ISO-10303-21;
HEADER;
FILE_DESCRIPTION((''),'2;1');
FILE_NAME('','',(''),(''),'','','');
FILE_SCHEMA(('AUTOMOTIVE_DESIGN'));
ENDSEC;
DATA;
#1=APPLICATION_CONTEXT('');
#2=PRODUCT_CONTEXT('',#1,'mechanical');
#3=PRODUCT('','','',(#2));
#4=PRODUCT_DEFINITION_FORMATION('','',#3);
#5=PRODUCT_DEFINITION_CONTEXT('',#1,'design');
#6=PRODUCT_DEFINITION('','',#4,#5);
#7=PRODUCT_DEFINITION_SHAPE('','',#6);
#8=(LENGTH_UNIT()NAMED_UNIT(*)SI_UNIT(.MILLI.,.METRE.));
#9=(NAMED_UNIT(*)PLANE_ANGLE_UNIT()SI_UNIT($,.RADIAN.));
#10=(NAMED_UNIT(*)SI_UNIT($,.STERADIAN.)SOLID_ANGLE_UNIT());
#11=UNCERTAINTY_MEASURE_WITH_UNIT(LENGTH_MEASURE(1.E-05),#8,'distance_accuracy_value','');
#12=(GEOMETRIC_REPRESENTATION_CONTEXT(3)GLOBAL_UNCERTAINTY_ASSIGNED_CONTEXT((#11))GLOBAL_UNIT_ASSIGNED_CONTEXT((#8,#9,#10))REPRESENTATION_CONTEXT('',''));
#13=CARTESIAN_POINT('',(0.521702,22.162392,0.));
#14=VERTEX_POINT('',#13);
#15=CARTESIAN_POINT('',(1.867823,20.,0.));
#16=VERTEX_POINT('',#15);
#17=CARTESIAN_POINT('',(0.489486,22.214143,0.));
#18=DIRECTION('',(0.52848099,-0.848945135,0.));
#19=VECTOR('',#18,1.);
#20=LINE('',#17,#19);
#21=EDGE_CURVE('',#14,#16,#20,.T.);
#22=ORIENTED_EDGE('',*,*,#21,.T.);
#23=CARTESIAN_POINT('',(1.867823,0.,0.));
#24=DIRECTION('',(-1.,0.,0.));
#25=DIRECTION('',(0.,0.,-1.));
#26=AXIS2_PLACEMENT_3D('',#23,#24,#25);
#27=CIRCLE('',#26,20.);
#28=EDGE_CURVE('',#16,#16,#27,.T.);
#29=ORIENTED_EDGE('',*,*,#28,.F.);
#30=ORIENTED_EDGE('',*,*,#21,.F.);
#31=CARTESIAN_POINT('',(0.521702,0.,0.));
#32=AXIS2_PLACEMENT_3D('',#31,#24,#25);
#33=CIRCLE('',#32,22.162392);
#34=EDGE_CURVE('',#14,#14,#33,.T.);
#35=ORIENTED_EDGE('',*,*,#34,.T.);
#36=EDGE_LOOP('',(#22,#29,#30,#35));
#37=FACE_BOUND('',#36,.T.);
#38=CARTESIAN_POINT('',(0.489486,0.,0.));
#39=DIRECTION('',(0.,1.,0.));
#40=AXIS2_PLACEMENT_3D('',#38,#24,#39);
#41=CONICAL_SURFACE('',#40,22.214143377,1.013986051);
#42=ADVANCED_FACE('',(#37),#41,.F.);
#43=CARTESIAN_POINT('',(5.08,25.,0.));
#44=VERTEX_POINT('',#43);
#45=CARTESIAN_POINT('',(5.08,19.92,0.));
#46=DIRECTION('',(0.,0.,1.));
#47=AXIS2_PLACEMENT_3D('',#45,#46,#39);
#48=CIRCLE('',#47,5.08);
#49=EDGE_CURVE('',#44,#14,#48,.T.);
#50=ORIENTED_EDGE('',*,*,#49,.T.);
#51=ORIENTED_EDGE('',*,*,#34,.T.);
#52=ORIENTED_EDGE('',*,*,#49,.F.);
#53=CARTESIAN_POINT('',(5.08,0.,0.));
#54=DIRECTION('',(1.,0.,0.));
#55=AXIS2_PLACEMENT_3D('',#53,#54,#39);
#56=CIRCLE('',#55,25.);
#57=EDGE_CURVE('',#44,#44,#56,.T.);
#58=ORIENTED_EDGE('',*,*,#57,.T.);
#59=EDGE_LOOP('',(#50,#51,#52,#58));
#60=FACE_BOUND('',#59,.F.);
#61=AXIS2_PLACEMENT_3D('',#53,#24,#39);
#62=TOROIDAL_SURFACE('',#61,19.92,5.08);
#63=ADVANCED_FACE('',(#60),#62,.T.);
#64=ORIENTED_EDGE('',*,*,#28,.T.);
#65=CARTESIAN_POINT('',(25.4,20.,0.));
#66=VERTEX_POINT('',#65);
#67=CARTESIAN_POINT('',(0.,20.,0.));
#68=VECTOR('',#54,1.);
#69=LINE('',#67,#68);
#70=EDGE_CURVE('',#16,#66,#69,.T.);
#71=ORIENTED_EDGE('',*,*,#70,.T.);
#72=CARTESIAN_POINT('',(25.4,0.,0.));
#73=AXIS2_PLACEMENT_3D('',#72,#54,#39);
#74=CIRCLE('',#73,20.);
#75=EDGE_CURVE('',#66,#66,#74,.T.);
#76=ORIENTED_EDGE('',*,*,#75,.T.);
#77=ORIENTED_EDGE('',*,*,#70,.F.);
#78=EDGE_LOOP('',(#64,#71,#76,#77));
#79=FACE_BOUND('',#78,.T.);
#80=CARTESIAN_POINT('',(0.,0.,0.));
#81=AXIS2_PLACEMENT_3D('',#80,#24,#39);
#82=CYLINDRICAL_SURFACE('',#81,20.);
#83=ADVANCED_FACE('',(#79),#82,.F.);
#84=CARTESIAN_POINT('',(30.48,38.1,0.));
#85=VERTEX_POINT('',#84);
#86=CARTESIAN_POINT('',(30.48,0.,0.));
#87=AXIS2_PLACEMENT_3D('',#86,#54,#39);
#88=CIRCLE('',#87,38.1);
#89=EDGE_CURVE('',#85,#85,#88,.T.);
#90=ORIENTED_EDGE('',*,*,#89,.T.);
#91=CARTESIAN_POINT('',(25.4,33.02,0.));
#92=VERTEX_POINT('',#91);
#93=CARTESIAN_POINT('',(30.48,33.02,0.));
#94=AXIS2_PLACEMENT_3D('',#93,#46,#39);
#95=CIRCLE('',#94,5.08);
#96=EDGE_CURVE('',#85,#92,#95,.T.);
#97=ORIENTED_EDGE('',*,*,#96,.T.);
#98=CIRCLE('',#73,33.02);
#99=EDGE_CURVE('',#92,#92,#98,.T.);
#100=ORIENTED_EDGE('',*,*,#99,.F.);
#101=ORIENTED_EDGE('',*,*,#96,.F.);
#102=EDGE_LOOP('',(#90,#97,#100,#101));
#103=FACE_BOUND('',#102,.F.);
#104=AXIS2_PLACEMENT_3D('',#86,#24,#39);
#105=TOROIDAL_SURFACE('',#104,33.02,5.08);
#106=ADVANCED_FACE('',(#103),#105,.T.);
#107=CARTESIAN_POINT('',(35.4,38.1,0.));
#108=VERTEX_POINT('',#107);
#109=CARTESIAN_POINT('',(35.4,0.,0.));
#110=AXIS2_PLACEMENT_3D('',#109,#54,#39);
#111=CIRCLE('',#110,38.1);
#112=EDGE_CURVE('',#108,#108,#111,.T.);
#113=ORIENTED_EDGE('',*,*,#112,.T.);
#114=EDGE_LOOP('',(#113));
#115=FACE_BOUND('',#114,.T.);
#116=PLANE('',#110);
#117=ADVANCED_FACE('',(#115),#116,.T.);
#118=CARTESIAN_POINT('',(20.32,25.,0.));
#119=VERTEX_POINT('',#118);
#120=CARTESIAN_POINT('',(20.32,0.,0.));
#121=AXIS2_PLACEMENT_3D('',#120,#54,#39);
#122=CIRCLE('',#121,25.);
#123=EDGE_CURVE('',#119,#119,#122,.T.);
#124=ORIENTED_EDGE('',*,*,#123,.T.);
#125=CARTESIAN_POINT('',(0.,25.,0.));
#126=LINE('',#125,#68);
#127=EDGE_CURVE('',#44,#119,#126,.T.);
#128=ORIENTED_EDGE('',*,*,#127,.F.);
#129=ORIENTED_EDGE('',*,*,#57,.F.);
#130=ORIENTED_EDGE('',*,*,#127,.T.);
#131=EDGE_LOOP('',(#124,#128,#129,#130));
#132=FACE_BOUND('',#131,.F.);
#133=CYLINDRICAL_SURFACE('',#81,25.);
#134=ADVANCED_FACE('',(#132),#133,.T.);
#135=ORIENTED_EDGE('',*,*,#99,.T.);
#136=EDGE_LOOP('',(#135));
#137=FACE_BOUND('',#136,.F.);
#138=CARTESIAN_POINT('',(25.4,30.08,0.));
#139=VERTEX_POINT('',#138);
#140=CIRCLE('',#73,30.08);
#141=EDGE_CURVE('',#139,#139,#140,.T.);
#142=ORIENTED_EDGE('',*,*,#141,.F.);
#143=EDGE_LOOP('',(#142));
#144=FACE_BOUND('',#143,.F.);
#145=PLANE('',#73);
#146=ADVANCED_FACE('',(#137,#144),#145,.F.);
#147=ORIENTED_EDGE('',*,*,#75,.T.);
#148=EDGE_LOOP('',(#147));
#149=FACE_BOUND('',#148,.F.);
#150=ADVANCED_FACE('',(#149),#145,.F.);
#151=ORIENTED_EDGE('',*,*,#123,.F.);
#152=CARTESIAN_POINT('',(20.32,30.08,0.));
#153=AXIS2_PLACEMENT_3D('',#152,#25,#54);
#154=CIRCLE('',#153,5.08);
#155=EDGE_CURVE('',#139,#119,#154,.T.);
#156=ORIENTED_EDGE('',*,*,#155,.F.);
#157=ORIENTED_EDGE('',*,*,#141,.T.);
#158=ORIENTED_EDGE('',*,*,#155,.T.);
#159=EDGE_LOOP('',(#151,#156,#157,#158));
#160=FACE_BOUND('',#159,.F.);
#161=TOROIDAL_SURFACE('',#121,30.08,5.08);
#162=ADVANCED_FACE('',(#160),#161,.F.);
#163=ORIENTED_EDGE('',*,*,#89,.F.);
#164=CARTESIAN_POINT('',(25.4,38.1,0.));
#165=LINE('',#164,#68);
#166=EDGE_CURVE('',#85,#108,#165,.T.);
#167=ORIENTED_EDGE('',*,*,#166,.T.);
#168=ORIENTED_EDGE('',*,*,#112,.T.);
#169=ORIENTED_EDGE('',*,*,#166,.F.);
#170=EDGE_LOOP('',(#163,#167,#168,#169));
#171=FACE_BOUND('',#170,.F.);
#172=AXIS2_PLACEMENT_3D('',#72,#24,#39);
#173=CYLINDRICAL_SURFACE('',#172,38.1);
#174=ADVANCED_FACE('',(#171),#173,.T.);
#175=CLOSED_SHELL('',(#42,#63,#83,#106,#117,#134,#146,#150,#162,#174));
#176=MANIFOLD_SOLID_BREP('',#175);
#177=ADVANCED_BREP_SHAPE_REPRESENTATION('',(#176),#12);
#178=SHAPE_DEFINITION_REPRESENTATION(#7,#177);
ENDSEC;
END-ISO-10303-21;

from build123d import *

# Parameters (mm, degrees)
F0_R     = 25
F0_R_2   = 20
F1_DEPTH = 25.4
F2_R     = 38.1
F2_R_2   = 25
F2_R_3   = 20
F3_DEPTH = 10


# Not quite as in the source:
# - a fillet or chamfer that OpenCascade refuses, or shapes differently, is made with other operations: its cross-section is extruded or revolved along the edge and cut away or added


with BuildPart() as f1:
    # F0 (on Right) → F1 (new body)
    with BuildSketch(Plane.YZ):
        Circle(F0_R)
        Circle(F0_R_2, mode=Mode.SUBTRACT)
    extrude(amount=F1_DEPTH)

    # F2 (on face) → F3 (join)
    with BuildSketch(Plane.YZ.offset(25.4)):
        Circle(F2_R)
        Circle(F2_R_2, mode=Mode.SUBTRACT)
        Circle(F2_R_2)
        Circle(F2_R_3, mode=Mode.SUBTRACT)
        Circle(F2_R_3)
    extrude(amount=F3_DEPTH)

    # F4: fillet of radius 5.08 on 4 edges, made by hand

    # F4_s1 → F4_t2 (revolve)
    with BuildSketch(Plane.XY):
        with BuildLine():
            ThreePointArc((25.4, 30.08), (23.9121024484, 26.4878975516), (20.32, 25))
            Line((20.32, 25), (25.4, 25))
            Line((25.4, 25), (25.4, 30.08))
        make_face()
    revolve(axis=Axis((25.4, 0, 0), (1, 0, 0)))

    # F4_s3 → F4_t4 (revolve, cut)
    with BuildSketch(Plane.XY):
        with BuildLine():
            ThreePointArc((5.08, 25), (1.4878975516, 23.5121024484), (0, 19.92))
            Line((0, 19.92), (0, 25))
            Line((0, 25), (5.08, 25))
        make_face()
    revolve(axis=Axis((0, 0, 0), (1, 0, 0)), mode=Mode.SUBTRACT)

    # F4_s5 → F4_t6 (revolve, cut)
    with BuildSketch(Plane.XY):
        with BuildLine():
            ThreePointArc((30.48, 38.1), (26.8878975516, 36.6121024484), (25.4, 33.02))
            Line((25.4, 33.02), (25.4, 38.1))
            Line((25.4, 38.1), (30.48, 38.1))
        make_face()
    revolve(axis=Axis((25.4, 0, 0), (1, 0, 0)), mode=Mode.SUBTRACT)

    # F5: chamfer of 1.524 on 1 edges, made by hand

    # F5_s1 → F5_t2 (revolve, cut)
    with BuildSketch(Plane.XY):
        with BuildLine():
            Line((0.4894859208, 22.2141433772), (1.9000393506, 19.9482483046))
            Line((1.9000393506, 19.9482483046), (1.9000393506, 19.9177683046))
            ThreePointArc((1.9000393506, 19.9177683046), (0.9503346555, 19.96952), (0.0006299603, 19.96952))
            Line((0.0006299603, 19.96952), (-0.0298462599, 20.00048))
            ThreePointArc((-0.0298462599, 20.00048), (0.1169178679, 21.1385325522), (0.4621361335, 22.2275977273))
            Line((0.4621361335, 22.2275977273), (0.4894859208, 22.2141433772))
        make_face()
    revolve(axis=Axis((0.0006299603, 0, 0), (-1, 0, 0)), mode=Mode.SUBTRACT)


solid = f1.part
